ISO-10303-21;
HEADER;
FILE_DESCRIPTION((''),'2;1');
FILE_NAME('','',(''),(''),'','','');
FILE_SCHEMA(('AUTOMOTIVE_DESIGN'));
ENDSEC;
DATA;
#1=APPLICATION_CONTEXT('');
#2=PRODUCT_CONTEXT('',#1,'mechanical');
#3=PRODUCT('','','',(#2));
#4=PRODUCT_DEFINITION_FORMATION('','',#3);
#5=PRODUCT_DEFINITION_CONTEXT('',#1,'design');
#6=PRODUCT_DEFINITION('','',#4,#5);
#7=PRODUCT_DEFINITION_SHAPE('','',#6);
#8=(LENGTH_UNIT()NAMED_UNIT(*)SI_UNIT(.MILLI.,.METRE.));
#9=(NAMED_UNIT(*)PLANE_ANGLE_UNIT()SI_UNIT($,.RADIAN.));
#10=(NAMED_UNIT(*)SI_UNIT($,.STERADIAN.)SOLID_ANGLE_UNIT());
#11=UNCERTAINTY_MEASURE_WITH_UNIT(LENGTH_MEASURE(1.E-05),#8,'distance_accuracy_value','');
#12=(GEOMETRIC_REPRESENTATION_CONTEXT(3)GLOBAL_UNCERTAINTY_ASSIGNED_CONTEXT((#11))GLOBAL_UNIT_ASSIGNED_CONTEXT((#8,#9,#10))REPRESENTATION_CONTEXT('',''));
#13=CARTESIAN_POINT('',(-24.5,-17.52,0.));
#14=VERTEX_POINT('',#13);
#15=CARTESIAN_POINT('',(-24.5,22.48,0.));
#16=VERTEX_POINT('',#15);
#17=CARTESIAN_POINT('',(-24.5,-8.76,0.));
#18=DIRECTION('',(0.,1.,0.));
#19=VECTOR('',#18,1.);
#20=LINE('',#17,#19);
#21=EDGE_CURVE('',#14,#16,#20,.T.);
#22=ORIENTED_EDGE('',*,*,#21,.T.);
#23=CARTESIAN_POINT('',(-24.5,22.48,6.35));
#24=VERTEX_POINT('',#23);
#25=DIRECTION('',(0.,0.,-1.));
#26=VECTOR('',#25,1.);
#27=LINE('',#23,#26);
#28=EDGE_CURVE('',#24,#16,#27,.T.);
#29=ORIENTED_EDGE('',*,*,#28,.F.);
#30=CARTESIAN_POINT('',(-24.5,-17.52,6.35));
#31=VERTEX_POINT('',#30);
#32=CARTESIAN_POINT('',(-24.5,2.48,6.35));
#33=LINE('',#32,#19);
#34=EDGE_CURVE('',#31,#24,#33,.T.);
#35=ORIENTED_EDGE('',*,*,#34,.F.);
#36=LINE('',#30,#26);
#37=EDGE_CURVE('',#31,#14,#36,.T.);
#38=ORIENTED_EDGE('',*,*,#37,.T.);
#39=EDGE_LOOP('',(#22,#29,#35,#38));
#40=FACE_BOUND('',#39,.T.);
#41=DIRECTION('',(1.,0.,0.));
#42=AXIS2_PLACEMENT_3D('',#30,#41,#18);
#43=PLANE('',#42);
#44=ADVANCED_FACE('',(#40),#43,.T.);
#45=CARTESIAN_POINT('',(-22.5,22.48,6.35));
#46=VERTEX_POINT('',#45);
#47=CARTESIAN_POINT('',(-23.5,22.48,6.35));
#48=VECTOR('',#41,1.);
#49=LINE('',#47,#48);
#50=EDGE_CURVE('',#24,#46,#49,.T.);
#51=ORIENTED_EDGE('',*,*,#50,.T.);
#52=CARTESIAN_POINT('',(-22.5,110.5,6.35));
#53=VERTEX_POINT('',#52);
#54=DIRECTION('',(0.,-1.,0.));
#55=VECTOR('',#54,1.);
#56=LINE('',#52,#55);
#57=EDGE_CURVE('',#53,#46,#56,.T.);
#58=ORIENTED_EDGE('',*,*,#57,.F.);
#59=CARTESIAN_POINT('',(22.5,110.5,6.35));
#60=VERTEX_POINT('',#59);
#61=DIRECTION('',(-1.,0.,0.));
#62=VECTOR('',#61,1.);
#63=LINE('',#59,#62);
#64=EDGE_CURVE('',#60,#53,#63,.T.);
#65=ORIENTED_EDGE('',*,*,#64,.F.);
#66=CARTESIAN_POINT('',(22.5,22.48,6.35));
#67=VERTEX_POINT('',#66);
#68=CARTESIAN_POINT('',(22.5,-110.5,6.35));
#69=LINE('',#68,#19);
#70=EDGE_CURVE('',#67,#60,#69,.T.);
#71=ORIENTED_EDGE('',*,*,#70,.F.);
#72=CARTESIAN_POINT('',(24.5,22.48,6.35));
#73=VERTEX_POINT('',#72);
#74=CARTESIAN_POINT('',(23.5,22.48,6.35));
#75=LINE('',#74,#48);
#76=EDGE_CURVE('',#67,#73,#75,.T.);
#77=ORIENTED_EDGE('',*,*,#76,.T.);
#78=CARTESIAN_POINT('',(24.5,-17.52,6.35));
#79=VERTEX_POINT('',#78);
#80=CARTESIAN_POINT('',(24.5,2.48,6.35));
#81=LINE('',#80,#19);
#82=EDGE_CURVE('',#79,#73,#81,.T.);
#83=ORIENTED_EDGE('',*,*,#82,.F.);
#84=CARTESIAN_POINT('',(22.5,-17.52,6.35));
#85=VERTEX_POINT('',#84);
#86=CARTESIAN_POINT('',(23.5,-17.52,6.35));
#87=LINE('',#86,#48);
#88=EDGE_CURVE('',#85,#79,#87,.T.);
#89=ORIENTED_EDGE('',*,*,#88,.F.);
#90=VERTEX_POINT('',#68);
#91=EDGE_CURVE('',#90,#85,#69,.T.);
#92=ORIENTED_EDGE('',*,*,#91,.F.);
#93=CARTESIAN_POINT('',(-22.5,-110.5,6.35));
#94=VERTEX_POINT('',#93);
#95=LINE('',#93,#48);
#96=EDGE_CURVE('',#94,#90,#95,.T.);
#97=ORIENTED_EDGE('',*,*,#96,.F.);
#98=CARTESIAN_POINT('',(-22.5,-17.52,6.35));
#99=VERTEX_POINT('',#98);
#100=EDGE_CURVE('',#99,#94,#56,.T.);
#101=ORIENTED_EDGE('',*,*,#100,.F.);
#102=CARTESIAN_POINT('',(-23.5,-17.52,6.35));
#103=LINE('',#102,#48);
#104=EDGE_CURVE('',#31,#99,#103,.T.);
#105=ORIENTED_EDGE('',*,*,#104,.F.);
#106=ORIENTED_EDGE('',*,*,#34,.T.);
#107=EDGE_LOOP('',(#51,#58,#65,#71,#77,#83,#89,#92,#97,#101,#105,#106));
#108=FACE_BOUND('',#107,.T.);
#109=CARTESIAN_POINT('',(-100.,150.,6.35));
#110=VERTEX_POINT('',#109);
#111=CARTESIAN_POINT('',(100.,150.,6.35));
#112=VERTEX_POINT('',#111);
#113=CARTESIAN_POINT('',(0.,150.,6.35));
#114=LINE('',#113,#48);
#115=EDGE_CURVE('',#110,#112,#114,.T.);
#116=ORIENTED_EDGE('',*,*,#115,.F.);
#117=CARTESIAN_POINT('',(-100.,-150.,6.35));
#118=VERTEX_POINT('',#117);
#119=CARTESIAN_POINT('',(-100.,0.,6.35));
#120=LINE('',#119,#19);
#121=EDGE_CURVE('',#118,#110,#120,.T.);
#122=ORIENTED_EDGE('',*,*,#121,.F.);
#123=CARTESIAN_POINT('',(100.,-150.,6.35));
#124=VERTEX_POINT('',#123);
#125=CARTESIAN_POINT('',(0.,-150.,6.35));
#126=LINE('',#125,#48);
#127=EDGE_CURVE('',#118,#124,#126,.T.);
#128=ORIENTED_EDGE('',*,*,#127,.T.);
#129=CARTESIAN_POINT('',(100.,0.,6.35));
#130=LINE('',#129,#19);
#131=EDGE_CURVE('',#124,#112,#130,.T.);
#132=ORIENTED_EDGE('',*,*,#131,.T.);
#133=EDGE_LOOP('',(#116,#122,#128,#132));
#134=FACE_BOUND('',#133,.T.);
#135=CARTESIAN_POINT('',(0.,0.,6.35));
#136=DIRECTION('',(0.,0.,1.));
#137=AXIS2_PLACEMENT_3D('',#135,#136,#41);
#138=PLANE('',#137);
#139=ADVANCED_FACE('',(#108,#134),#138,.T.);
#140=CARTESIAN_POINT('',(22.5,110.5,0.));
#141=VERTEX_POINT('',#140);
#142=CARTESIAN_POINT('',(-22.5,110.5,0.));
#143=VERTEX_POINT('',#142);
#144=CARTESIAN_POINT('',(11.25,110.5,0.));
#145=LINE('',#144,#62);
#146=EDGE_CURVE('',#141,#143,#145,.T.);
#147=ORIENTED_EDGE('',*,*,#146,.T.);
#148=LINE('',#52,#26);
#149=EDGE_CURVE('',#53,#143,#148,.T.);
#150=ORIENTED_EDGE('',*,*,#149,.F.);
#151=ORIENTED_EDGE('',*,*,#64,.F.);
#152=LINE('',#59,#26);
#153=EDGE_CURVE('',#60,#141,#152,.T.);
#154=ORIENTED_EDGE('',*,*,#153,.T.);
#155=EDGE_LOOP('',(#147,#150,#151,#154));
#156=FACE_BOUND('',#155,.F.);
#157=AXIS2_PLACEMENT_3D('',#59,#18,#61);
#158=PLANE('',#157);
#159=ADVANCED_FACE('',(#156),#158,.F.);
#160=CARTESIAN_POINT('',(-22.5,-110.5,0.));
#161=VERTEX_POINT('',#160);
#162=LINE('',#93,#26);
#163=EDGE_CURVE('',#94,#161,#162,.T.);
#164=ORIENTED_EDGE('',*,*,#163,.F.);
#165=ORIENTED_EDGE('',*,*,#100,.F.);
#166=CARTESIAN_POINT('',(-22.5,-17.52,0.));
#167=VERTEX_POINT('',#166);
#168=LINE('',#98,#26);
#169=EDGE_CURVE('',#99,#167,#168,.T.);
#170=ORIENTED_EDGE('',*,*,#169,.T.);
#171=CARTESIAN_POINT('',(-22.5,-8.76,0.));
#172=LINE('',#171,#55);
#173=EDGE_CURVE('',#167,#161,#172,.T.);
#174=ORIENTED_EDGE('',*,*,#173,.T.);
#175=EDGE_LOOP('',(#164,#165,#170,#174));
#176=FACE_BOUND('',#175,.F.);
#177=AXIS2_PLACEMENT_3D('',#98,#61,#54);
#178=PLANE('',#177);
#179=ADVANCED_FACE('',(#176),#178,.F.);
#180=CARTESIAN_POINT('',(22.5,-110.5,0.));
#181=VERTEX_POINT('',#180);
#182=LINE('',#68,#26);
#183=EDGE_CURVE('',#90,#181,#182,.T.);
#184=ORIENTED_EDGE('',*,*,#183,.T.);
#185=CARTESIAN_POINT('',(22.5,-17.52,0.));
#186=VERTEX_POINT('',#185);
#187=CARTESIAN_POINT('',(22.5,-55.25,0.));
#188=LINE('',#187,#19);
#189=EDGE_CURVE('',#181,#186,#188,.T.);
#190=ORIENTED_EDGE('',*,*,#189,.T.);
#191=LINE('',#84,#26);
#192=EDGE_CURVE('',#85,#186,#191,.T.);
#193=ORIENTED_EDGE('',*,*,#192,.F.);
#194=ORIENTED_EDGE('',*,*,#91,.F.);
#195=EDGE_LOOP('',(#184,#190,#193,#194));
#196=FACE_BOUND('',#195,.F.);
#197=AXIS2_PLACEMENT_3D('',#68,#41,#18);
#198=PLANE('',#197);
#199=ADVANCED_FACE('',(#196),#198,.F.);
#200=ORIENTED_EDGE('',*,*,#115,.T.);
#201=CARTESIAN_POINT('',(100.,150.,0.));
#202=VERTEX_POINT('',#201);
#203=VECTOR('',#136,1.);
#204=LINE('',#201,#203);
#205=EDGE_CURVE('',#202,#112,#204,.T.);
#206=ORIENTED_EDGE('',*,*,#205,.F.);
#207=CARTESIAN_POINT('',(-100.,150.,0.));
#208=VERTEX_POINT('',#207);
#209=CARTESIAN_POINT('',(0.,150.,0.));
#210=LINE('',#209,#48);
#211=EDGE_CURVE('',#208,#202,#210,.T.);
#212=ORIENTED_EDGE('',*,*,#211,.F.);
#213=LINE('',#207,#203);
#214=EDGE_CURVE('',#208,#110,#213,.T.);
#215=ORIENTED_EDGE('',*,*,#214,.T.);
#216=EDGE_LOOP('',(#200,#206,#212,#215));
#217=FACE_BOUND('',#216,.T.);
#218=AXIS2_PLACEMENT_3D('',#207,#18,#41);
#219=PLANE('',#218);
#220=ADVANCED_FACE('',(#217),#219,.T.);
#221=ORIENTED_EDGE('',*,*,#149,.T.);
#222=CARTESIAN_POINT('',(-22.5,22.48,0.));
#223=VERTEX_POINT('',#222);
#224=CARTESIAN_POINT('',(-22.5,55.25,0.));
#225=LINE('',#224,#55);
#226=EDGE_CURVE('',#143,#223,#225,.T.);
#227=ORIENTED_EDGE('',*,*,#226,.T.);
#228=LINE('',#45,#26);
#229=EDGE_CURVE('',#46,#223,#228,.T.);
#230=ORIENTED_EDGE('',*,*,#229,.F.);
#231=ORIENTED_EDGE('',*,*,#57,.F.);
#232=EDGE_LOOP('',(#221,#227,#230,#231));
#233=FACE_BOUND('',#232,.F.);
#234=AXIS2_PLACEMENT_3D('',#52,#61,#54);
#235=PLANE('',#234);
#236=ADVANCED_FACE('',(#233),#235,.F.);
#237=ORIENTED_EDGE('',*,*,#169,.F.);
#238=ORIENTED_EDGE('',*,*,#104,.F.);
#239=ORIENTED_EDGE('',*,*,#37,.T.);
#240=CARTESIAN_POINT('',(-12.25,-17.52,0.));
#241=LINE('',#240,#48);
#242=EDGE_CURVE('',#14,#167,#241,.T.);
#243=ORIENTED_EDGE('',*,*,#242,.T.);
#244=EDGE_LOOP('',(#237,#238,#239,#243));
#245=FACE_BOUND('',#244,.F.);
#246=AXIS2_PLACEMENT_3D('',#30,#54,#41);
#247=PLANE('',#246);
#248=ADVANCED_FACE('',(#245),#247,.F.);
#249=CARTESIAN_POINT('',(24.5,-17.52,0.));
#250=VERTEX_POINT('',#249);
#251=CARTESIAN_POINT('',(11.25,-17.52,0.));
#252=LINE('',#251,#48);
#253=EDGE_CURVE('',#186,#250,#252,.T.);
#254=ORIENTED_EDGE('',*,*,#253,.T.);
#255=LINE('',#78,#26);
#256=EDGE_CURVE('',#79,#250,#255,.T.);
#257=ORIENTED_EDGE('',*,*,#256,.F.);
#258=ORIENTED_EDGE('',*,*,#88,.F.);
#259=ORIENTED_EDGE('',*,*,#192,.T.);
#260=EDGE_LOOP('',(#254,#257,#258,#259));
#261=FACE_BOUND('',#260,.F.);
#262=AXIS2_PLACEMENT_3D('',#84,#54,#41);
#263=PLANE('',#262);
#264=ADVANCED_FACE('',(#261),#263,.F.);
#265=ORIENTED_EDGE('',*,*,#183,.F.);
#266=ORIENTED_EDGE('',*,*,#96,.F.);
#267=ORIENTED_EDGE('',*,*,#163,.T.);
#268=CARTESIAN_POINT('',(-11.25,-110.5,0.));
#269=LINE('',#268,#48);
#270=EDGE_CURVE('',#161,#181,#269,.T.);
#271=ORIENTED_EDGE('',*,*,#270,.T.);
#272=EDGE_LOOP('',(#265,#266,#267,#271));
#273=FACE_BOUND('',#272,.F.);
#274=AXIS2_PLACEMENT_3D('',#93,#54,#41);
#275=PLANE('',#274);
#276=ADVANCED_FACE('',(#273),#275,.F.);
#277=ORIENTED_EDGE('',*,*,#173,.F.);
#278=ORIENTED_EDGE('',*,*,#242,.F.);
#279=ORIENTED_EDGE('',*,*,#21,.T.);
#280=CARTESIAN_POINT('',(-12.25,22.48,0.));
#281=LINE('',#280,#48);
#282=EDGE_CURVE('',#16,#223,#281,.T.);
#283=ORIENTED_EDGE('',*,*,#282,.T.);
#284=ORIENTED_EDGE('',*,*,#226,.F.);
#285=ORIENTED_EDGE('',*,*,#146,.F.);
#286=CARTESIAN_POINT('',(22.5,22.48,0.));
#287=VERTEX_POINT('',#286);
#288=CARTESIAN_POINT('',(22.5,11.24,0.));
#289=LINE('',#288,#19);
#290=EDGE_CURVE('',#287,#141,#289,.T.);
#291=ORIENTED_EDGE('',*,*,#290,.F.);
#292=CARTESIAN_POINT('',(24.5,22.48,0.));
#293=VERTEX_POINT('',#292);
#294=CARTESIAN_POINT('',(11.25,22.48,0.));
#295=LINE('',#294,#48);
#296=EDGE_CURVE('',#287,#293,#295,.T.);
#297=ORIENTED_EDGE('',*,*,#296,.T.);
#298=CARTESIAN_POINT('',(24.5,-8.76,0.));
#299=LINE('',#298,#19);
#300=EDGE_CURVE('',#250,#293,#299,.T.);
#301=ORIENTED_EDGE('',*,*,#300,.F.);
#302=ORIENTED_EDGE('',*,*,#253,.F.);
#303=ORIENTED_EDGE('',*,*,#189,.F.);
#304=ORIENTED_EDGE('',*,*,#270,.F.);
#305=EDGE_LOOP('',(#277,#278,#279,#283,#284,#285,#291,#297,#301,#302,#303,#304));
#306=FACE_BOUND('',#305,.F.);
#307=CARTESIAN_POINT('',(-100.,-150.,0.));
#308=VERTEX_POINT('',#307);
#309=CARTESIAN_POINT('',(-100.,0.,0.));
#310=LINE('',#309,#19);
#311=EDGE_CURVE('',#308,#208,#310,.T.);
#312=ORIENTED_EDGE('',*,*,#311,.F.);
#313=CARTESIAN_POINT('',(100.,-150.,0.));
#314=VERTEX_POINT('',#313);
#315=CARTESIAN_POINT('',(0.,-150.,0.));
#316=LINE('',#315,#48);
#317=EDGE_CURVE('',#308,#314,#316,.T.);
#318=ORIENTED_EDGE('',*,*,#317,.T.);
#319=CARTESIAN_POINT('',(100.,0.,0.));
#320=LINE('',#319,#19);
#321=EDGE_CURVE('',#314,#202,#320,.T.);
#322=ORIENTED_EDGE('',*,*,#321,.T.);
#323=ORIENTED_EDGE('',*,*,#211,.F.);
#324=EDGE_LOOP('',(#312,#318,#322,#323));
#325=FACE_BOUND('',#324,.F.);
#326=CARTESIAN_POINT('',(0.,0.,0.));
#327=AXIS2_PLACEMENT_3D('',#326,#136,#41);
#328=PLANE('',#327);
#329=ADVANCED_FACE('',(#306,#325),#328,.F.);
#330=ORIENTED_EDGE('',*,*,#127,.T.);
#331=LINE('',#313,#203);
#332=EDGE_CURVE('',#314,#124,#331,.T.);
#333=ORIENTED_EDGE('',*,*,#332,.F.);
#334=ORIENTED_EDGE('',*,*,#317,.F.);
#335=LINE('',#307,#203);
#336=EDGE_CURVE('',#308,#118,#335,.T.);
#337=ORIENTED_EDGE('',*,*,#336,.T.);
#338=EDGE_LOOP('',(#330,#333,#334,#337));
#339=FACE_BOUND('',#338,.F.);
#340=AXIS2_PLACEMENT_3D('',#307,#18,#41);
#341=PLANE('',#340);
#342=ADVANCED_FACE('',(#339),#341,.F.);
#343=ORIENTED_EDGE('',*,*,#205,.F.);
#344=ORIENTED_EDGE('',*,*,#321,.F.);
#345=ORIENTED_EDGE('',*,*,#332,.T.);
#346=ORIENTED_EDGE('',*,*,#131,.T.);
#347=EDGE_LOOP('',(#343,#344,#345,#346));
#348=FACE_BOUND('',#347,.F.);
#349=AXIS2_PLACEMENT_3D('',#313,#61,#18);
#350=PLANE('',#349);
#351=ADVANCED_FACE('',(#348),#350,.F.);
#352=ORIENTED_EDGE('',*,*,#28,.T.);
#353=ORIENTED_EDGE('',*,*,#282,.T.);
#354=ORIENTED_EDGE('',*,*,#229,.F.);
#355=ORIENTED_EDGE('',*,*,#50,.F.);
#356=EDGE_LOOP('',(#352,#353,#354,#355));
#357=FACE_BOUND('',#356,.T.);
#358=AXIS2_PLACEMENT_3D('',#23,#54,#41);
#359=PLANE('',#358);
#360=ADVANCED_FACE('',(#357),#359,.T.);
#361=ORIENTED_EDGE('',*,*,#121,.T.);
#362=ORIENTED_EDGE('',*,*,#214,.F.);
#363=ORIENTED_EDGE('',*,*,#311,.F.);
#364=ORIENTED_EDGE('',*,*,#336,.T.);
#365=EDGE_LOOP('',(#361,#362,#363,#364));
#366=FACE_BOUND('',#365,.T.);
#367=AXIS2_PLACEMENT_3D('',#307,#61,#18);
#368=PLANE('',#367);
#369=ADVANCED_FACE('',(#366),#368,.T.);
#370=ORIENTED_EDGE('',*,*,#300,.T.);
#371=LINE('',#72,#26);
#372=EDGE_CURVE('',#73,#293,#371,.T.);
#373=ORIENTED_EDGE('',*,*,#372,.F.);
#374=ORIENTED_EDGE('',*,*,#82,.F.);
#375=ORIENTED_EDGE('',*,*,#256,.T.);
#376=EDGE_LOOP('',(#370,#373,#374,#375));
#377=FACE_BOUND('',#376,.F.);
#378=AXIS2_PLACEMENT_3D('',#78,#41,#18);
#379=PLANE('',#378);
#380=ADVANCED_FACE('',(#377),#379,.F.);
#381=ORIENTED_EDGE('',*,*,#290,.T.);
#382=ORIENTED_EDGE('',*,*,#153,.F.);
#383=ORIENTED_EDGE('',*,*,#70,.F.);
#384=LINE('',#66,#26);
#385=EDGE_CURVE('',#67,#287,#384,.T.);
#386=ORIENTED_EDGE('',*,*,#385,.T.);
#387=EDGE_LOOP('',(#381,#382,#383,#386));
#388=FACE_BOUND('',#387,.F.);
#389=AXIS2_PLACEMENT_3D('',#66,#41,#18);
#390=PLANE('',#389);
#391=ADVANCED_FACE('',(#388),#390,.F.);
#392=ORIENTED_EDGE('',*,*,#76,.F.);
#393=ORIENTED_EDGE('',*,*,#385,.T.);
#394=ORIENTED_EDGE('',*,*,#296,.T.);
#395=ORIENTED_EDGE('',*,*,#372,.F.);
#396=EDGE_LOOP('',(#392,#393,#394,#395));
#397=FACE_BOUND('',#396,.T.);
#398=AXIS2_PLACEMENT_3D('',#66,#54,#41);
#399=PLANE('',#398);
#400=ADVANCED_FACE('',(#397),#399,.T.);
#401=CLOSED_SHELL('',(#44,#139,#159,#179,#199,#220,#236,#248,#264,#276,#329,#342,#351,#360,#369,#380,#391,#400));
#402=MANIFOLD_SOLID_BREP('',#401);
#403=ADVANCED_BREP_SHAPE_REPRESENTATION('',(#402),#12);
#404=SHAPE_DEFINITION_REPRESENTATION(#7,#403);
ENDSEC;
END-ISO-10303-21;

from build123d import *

# Parameters (mm, degrees)
F0_W     = 200
F0_H     = 300
F1_DEPTH = 6.35
F2_W     = 2
F2_H     = 40
F3_DEPTH = 25.4


# Not quite as in the source:
# - a length typed as a fraction of an inch, garbled in the dataset ("3 / 203.2 mm" for 3/8 in), is restored


with BuildPart() as f1:
    # F0 (on Top) → F1 (new body)
    with BuildSketch(Plane.XY):
        Rectangle(F0_W, F0_H)
    extrude(amount=F1_DEPTH)

    # F2 (on face) → F3 (cut)
    with BuildSketch(Plane.XY.offset(6.35)):
        Polygon((22.5, 22.48), (22.5, 110.5), (-22.5, 110.5), (-22.5, 22.48), (-22.5, -17.52), (-22.5, -110.5), (22.5, -110.5), (22.5, -17.52), align=None)
        with Locations((23.5, 2.48)):
            Rectangle(F2_W, F2_H)
        with Locations((-23.5, 2.48)):
            Rectangle(F2_W, F2_H)
    extrude(amount=-F3_DEPTH, mode=Mode.SUBTRACT)


solid = f1.part
